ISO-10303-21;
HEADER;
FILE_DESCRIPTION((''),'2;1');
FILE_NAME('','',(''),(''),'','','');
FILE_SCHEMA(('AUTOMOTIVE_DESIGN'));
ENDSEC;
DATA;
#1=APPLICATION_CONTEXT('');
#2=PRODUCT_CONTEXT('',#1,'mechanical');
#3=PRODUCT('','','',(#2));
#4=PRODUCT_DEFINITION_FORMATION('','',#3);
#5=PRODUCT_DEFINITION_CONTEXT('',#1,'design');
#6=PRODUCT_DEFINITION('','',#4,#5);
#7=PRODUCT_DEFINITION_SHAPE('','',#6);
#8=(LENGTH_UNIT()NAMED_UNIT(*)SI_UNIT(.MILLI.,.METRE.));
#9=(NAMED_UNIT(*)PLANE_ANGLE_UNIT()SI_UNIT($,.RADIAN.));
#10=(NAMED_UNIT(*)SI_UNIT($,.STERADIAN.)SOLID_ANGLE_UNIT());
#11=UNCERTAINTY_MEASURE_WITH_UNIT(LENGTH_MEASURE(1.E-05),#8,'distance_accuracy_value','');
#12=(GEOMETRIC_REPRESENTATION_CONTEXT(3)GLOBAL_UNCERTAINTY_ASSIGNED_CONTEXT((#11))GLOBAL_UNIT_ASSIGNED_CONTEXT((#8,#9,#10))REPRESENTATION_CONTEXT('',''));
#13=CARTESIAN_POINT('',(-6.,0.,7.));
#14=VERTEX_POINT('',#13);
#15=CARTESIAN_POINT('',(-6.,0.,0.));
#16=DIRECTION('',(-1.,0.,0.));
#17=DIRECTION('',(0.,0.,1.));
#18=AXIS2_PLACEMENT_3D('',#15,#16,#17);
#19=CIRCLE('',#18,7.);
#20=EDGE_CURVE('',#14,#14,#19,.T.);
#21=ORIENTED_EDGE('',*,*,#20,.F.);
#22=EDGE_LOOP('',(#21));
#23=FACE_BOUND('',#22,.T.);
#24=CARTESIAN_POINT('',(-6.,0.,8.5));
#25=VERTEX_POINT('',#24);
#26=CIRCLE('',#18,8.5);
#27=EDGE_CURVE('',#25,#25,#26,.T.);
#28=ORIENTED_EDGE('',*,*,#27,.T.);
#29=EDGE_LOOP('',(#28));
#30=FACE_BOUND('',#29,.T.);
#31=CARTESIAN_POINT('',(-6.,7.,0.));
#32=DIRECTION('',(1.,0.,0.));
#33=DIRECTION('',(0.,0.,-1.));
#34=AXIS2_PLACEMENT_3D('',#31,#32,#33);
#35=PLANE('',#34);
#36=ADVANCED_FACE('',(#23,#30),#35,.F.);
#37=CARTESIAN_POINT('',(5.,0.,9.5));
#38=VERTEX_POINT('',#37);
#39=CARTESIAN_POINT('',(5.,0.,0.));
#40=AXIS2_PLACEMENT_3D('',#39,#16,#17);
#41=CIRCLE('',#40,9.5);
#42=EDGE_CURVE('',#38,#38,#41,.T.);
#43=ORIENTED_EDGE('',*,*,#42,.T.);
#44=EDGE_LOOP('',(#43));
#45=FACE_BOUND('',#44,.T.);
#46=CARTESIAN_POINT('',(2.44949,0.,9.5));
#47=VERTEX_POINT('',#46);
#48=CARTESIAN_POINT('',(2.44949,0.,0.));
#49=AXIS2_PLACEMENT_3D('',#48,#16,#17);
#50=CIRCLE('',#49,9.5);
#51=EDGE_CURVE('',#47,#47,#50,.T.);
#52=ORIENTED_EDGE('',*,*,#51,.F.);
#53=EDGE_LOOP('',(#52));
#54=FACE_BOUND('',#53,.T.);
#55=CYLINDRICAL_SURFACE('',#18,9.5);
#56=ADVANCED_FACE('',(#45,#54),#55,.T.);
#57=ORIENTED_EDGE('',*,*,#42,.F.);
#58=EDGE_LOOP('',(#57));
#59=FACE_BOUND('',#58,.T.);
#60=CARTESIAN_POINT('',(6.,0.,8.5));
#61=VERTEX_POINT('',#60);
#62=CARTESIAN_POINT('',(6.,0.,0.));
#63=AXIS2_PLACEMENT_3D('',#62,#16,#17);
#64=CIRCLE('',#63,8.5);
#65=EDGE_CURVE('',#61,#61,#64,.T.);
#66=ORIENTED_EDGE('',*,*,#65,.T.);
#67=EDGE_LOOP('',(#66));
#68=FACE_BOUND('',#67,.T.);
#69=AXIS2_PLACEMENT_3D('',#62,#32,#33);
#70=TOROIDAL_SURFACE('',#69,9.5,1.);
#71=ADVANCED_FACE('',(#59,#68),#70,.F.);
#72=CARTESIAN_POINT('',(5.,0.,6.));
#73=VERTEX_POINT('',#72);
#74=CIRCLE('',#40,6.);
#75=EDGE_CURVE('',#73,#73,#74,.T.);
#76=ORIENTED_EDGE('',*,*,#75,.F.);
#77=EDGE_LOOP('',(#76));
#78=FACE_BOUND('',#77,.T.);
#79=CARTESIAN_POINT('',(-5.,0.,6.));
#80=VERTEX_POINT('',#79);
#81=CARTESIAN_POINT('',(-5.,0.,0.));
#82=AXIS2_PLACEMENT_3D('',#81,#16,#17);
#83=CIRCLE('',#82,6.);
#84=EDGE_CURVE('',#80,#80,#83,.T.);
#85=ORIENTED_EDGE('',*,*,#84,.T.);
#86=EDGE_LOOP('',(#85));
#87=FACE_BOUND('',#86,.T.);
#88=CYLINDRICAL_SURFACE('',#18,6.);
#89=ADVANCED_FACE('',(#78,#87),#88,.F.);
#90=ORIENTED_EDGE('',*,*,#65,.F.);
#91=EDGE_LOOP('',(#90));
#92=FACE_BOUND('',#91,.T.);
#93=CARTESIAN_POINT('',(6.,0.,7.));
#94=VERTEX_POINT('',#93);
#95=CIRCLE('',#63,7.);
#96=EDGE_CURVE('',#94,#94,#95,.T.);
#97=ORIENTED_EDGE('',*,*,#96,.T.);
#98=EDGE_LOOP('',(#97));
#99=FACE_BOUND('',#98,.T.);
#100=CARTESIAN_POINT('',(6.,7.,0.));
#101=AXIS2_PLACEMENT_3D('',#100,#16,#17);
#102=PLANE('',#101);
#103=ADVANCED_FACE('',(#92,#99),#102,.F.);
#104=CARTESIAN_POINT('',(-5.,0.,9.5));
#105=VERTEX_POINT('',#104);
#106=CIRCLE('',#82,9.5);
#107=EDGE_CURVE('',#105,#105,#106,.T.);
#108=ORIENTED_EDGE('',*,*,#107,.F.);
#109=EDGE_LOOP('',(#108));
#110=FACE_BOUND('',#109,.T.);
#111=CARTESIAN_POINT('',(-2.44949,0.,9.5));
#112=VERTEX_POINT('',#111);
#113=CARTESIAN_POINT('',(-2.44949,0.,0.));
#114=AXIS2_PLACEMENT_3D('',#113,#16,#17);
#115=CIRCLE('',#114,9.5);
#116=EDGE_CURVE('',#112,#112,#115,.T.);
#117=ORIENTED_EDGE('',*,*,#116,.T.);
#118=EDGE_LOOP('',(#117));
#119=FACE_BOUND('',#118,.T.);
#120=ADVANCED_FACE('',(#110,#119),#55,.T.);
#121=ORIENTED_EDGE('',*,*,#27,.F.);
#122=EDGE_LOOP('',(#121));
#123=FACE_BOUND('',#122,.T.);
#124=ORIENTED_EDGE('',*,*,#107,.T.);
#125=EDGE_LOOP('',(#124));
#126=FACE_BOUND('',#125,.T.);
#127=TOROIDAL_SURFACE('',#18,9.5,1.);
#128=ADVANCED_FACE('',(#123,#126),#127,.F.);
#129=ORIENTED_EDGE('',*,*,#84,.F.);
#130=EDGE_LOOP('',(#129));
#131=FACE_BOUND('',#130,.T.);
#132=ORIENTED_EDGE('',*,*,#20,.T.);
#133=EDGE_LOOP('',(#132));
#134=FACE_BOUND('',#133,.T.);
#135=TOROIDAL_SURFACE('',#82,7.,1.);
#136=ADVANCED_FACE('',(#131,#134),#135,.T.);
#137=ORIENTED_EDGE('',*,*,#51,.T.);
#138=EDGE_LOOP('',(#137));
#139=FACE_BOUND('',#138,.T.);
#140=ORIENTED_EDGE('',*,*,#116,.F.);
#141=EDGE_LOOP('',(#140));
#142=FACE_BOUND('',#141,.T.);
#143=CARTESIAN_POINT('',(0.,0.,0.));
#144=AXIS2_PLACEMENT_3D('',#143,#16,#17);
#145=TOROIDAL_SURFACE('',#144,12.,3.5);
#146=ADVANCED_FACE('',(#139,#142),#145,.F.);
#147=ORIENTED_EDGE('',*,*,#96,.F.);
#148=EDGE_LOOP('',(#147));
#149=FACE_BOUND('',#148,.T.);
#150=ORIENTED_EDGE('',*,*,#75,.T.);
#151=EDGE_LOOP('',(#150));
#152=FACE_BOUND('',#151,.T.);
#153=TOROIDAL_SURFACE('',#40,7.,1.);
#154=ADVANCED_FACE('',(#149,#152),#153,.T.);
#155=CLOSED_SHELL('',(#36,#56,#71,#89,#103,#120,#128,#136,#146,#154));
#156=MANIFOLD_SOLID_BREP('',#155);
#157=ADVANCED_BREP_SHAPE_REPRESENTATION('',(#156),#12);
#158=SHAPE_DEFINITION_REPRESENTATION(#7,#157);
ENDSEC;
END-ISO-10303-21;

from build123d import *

# Parameters (mm, degrees)
CUT_EXTRUDE1_START = -1
SKETCH3_R          = 9.5
SKETCH3_R_2        = 8.5
CUT_EXTRUDE1_DEPTH = 1
FILLET1_R          = 1


with BuildPart() as part:
    # Sketch2 → Revolve1 (revolve)
    with BuildSketch(Plane.XY, mode=Mode.PRIVATE) as revolve1_sk:
        with BuildLine():
            Line((-6, 9.5), (-2.449489743, 9.5))
            ThreePointArc((-2.449489743, 9.5), (0, 8.5), (2.449489743, 9.5))
            Line((2.449489743, 9.5), (6, 9.5))
            Line((6, 9.5), (6, 7))
            ThreePointArc((6, 7), (5.707106781, 6.292893219), (5, 6))
            Line((5, 6), (-5, 6))
            ThreePointArc((-5, 6), (-5.707106781, 6.292893219), (-6, 7))
            Line((-6, 7), (-6, 9.5))
        make_face()
    revolve(revolve1_sk.sketch.rotate(Axis((-6, 0, 0), (1, 0, 0)), 90), axis=Axis((-6, 0, 0), (1, 0, 0)))

    # Sketch3 → Cut-Extrude1 (cut)
    with BuildSketch(Plane.ZY.offset(6).offset(CUT_EXTRUDE1_START)):
        Circle(SKETCH3_R)
        Circle(SKETCH3_R_2, mode=Mode.SUBTRACT)
    cut_extrude1 = extrude(amount=CUT_EXTRUDE1_DEPTH, mode=Mode.SUBTRACT)

    # Mirror1: Cut-Extrude1 across plane
    add(cut_extrude1.mirror(Plane(origin=(0, 0, 0), x_dir=(0, 0, 1), z_dir=(1, 0, 0))), mode=Mode.SUBTRACT)

    # Fillet1
    fillet1_edges = [part.edges().sort_by_distance(p)[0] for p in [
        (-5, 0, -8.5),
        (5, 0, -8.5),
    ]]
    fillet(fillet1_edges, radius=FILLET1_R - 0.0001)  # a hair under: the kernel refuses the full size


solid = part.part
